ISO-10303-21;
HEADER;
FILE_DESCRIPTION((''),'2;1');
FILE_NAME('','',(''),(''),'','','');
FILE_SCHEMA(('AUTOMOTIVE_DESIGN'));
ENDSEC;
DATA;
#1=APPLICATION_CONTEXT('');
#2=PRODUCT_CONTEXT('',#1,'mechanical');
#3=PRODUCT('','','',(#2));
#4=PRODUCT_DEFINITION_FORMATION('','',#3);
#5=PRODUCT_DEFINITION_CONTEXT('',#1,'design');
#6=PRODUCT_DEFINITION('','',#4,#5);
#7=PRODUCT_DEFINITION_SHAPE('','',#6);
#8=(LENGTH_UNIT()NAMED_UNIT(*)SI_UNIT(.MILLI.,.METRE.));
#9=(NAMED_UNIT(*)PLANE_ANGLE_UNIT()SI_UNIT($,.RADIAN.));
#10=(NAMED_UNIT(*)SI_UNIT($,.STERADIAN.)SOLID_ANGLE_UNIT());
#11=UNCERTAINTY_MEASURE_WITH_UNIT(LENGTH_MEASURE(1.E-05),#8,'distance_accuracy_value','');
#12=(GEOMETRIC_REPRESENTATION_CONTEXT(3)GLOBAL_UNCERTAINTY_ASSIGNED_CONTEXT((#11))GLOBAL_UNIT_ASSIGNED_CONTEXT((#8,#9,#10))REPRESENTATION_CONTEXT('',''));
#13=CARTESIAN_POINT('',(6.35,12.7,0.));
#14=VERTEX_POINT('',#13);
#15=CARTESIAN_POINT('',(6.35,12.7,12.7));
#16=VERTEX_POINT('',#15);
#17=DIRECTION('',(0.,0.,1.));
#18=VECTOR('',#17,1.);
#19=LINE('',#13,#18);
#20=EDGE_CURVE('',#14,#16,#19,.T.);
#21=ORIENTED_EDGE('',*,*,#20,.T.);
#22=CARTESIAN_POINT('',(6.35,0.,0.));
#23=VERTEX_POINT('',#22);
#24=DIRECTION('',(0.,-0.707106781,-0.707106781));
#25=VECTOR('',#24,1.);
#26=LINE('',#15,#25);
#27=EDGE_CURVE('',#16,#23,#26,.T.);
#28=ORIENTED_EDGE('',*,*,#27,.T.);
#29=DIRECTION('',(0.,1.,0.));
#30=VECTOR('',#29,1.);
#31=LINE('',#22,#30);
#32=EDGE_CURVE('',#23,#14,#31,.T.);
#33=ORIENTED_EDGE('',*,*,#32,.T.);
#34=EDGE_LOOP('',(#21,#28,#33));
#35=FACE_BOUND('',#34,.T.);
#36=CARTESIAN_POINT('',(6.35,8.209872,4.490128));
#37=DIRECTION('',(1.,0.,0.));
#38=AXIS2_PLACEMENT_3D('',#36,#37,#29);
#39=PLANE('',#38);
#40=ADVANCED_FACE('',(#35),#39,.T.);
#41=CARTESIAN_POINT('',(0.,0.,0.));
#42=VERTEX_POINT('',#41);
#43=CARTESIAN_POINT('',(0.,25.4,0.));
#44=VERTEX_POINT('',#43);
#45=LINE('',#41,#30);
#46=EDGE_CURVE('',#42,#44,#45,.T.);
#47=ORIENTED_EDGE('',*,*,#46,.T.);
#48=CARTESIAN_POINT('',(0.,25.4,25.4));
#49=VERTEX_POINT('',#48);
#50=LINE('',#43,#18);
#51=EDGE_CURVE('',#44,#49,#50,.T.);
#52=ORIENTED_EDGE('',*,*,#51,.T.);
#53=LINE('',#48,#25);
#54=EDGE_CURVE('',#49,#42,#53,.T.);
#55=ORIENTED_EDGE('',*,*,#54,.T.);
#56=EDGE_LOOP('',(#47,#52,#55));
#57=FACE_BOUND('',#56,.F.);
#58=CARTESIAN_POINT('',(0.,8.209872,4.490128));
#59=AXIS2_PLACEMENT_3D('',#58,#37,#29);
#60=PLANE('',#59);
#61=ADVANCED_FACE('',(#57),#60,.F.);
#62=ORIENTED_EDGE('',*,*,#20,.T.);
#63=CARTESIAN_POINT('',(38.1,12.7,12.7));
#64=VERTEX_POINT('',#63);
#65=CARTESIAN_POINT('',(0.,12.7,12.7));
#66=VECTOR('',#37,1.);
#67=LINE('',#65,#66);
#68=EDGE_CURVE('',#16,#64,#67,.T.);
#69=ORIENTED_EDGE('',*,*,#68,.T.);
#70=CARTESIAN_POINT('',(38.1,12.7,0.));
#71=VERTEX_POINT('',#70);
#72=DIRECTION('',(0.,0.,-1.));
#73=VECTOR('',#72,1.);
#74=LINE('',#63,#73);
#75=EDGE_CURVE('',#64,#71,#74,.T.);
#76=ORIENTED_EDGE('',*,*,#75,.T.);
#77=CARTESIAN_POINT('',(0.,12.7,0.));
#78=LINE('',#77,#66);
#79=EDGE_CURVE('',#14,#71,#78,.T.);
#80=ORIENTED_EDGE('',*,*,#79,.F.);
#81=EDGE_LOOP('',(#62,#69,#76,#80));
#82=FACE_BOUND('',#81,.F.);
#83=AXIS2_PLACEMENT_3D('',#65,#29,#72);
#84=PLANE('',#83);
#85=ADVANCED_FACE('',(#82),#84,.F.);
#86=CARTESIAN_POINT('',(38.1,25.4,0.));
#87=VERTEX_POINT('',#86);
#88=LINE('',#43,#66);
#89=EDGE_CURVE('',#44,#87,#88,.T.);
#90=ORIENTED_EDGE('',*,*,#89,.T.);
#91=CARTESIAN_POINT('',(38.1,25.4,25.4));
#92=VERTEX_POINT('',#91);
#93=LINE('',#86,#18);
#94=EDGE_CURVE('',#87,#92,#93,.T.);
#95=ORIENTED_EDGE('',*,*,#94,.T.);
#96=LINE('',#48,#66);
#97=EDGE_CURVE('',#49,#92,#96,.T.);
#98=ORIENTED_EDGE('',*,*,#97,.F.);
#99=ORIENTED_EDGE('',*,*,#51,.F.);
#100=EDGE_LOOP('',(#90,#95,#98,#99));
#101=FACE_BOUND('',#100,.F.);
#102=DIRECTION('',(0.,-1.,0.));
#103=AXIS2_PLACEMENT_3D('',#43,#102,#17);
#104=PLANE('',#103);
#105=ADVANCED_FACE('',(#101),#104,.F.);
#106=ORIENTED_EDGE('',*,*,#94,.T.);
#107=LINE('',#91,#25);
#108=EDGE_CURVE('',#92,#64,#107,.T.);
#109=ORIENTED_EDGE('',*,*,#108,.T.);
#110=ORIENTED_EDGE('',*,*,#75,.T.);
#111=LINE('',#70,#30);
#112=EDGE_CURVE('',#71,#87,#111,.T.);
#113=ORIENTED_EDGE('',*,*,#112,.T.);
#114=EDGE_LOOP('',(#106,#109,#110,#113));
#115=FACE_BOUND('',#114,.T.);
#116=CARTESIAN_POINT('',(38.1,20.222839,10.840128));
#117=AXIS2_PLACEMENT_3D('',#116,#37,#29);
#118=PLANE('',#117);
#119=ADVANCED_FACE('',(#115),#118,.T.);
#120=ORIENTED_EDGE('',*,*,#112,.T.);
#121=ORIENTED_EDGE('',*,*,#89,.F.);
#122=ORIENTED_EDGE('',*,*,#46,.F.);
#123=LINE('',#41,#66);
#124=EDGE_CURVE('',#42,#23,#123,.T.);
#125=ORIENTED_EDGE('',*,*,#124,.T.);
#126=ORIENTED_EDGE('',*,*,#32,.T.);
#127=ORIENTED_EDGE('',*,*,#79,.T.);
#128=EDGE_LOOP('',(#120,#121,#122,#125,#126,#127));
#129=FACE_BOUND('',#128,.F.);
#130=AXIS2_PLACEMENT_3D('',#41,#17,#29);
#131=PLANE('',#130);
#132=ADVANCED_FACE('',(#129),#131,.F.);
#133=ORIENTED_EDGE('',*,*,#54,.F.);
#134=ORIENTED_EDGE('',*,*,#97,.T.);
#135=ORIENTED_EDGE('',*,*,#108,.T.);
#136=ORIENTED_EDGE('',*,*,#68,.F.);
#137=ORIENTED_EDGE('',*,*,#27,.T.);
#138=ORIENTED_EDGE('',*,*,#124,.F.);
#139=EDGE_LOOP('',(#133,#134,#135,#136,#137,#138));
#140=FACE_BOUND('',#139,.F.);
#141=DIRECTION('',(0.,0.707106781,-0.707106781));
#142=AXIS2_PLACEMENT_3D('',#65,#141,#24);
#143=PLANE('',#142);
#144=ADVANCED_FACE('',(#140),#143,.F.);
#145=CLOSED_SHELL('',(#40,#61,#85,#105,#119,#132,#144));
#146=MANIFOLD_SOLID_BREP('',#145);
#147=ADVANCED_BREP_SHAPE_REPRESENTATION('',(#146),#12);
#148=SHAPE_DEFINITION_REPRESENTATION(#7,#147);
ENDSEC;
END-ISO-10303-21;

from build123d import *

# Parameters (mm, degrees)
F1_DEPTH = 38.1
F3_DEPTH = 6.35


# Not quite as in the source:
# - the program builds the solid bodies; features that only make, move or delete a surface that nothing else refers to are left out


with BuildPart() as f1:
    # F0 (on Right) → F1 (new body)
    with BuildSketch(Plane.YZ):
        Polygon((12.7, 0), (25.4, 0), (25.4, 25.4), (12.7, 12.7), align=None)
    extrude(amount=F1_DEPTH)

    # F2 (on Right) → F3 (join)
    with BuildSketch(Plane.YZ):
        Polygon((12.7, 12.7), (0, 0), (12.7, 0), align=None)
    extrude(amount=F3_DEPTH)


solid = f1.part
